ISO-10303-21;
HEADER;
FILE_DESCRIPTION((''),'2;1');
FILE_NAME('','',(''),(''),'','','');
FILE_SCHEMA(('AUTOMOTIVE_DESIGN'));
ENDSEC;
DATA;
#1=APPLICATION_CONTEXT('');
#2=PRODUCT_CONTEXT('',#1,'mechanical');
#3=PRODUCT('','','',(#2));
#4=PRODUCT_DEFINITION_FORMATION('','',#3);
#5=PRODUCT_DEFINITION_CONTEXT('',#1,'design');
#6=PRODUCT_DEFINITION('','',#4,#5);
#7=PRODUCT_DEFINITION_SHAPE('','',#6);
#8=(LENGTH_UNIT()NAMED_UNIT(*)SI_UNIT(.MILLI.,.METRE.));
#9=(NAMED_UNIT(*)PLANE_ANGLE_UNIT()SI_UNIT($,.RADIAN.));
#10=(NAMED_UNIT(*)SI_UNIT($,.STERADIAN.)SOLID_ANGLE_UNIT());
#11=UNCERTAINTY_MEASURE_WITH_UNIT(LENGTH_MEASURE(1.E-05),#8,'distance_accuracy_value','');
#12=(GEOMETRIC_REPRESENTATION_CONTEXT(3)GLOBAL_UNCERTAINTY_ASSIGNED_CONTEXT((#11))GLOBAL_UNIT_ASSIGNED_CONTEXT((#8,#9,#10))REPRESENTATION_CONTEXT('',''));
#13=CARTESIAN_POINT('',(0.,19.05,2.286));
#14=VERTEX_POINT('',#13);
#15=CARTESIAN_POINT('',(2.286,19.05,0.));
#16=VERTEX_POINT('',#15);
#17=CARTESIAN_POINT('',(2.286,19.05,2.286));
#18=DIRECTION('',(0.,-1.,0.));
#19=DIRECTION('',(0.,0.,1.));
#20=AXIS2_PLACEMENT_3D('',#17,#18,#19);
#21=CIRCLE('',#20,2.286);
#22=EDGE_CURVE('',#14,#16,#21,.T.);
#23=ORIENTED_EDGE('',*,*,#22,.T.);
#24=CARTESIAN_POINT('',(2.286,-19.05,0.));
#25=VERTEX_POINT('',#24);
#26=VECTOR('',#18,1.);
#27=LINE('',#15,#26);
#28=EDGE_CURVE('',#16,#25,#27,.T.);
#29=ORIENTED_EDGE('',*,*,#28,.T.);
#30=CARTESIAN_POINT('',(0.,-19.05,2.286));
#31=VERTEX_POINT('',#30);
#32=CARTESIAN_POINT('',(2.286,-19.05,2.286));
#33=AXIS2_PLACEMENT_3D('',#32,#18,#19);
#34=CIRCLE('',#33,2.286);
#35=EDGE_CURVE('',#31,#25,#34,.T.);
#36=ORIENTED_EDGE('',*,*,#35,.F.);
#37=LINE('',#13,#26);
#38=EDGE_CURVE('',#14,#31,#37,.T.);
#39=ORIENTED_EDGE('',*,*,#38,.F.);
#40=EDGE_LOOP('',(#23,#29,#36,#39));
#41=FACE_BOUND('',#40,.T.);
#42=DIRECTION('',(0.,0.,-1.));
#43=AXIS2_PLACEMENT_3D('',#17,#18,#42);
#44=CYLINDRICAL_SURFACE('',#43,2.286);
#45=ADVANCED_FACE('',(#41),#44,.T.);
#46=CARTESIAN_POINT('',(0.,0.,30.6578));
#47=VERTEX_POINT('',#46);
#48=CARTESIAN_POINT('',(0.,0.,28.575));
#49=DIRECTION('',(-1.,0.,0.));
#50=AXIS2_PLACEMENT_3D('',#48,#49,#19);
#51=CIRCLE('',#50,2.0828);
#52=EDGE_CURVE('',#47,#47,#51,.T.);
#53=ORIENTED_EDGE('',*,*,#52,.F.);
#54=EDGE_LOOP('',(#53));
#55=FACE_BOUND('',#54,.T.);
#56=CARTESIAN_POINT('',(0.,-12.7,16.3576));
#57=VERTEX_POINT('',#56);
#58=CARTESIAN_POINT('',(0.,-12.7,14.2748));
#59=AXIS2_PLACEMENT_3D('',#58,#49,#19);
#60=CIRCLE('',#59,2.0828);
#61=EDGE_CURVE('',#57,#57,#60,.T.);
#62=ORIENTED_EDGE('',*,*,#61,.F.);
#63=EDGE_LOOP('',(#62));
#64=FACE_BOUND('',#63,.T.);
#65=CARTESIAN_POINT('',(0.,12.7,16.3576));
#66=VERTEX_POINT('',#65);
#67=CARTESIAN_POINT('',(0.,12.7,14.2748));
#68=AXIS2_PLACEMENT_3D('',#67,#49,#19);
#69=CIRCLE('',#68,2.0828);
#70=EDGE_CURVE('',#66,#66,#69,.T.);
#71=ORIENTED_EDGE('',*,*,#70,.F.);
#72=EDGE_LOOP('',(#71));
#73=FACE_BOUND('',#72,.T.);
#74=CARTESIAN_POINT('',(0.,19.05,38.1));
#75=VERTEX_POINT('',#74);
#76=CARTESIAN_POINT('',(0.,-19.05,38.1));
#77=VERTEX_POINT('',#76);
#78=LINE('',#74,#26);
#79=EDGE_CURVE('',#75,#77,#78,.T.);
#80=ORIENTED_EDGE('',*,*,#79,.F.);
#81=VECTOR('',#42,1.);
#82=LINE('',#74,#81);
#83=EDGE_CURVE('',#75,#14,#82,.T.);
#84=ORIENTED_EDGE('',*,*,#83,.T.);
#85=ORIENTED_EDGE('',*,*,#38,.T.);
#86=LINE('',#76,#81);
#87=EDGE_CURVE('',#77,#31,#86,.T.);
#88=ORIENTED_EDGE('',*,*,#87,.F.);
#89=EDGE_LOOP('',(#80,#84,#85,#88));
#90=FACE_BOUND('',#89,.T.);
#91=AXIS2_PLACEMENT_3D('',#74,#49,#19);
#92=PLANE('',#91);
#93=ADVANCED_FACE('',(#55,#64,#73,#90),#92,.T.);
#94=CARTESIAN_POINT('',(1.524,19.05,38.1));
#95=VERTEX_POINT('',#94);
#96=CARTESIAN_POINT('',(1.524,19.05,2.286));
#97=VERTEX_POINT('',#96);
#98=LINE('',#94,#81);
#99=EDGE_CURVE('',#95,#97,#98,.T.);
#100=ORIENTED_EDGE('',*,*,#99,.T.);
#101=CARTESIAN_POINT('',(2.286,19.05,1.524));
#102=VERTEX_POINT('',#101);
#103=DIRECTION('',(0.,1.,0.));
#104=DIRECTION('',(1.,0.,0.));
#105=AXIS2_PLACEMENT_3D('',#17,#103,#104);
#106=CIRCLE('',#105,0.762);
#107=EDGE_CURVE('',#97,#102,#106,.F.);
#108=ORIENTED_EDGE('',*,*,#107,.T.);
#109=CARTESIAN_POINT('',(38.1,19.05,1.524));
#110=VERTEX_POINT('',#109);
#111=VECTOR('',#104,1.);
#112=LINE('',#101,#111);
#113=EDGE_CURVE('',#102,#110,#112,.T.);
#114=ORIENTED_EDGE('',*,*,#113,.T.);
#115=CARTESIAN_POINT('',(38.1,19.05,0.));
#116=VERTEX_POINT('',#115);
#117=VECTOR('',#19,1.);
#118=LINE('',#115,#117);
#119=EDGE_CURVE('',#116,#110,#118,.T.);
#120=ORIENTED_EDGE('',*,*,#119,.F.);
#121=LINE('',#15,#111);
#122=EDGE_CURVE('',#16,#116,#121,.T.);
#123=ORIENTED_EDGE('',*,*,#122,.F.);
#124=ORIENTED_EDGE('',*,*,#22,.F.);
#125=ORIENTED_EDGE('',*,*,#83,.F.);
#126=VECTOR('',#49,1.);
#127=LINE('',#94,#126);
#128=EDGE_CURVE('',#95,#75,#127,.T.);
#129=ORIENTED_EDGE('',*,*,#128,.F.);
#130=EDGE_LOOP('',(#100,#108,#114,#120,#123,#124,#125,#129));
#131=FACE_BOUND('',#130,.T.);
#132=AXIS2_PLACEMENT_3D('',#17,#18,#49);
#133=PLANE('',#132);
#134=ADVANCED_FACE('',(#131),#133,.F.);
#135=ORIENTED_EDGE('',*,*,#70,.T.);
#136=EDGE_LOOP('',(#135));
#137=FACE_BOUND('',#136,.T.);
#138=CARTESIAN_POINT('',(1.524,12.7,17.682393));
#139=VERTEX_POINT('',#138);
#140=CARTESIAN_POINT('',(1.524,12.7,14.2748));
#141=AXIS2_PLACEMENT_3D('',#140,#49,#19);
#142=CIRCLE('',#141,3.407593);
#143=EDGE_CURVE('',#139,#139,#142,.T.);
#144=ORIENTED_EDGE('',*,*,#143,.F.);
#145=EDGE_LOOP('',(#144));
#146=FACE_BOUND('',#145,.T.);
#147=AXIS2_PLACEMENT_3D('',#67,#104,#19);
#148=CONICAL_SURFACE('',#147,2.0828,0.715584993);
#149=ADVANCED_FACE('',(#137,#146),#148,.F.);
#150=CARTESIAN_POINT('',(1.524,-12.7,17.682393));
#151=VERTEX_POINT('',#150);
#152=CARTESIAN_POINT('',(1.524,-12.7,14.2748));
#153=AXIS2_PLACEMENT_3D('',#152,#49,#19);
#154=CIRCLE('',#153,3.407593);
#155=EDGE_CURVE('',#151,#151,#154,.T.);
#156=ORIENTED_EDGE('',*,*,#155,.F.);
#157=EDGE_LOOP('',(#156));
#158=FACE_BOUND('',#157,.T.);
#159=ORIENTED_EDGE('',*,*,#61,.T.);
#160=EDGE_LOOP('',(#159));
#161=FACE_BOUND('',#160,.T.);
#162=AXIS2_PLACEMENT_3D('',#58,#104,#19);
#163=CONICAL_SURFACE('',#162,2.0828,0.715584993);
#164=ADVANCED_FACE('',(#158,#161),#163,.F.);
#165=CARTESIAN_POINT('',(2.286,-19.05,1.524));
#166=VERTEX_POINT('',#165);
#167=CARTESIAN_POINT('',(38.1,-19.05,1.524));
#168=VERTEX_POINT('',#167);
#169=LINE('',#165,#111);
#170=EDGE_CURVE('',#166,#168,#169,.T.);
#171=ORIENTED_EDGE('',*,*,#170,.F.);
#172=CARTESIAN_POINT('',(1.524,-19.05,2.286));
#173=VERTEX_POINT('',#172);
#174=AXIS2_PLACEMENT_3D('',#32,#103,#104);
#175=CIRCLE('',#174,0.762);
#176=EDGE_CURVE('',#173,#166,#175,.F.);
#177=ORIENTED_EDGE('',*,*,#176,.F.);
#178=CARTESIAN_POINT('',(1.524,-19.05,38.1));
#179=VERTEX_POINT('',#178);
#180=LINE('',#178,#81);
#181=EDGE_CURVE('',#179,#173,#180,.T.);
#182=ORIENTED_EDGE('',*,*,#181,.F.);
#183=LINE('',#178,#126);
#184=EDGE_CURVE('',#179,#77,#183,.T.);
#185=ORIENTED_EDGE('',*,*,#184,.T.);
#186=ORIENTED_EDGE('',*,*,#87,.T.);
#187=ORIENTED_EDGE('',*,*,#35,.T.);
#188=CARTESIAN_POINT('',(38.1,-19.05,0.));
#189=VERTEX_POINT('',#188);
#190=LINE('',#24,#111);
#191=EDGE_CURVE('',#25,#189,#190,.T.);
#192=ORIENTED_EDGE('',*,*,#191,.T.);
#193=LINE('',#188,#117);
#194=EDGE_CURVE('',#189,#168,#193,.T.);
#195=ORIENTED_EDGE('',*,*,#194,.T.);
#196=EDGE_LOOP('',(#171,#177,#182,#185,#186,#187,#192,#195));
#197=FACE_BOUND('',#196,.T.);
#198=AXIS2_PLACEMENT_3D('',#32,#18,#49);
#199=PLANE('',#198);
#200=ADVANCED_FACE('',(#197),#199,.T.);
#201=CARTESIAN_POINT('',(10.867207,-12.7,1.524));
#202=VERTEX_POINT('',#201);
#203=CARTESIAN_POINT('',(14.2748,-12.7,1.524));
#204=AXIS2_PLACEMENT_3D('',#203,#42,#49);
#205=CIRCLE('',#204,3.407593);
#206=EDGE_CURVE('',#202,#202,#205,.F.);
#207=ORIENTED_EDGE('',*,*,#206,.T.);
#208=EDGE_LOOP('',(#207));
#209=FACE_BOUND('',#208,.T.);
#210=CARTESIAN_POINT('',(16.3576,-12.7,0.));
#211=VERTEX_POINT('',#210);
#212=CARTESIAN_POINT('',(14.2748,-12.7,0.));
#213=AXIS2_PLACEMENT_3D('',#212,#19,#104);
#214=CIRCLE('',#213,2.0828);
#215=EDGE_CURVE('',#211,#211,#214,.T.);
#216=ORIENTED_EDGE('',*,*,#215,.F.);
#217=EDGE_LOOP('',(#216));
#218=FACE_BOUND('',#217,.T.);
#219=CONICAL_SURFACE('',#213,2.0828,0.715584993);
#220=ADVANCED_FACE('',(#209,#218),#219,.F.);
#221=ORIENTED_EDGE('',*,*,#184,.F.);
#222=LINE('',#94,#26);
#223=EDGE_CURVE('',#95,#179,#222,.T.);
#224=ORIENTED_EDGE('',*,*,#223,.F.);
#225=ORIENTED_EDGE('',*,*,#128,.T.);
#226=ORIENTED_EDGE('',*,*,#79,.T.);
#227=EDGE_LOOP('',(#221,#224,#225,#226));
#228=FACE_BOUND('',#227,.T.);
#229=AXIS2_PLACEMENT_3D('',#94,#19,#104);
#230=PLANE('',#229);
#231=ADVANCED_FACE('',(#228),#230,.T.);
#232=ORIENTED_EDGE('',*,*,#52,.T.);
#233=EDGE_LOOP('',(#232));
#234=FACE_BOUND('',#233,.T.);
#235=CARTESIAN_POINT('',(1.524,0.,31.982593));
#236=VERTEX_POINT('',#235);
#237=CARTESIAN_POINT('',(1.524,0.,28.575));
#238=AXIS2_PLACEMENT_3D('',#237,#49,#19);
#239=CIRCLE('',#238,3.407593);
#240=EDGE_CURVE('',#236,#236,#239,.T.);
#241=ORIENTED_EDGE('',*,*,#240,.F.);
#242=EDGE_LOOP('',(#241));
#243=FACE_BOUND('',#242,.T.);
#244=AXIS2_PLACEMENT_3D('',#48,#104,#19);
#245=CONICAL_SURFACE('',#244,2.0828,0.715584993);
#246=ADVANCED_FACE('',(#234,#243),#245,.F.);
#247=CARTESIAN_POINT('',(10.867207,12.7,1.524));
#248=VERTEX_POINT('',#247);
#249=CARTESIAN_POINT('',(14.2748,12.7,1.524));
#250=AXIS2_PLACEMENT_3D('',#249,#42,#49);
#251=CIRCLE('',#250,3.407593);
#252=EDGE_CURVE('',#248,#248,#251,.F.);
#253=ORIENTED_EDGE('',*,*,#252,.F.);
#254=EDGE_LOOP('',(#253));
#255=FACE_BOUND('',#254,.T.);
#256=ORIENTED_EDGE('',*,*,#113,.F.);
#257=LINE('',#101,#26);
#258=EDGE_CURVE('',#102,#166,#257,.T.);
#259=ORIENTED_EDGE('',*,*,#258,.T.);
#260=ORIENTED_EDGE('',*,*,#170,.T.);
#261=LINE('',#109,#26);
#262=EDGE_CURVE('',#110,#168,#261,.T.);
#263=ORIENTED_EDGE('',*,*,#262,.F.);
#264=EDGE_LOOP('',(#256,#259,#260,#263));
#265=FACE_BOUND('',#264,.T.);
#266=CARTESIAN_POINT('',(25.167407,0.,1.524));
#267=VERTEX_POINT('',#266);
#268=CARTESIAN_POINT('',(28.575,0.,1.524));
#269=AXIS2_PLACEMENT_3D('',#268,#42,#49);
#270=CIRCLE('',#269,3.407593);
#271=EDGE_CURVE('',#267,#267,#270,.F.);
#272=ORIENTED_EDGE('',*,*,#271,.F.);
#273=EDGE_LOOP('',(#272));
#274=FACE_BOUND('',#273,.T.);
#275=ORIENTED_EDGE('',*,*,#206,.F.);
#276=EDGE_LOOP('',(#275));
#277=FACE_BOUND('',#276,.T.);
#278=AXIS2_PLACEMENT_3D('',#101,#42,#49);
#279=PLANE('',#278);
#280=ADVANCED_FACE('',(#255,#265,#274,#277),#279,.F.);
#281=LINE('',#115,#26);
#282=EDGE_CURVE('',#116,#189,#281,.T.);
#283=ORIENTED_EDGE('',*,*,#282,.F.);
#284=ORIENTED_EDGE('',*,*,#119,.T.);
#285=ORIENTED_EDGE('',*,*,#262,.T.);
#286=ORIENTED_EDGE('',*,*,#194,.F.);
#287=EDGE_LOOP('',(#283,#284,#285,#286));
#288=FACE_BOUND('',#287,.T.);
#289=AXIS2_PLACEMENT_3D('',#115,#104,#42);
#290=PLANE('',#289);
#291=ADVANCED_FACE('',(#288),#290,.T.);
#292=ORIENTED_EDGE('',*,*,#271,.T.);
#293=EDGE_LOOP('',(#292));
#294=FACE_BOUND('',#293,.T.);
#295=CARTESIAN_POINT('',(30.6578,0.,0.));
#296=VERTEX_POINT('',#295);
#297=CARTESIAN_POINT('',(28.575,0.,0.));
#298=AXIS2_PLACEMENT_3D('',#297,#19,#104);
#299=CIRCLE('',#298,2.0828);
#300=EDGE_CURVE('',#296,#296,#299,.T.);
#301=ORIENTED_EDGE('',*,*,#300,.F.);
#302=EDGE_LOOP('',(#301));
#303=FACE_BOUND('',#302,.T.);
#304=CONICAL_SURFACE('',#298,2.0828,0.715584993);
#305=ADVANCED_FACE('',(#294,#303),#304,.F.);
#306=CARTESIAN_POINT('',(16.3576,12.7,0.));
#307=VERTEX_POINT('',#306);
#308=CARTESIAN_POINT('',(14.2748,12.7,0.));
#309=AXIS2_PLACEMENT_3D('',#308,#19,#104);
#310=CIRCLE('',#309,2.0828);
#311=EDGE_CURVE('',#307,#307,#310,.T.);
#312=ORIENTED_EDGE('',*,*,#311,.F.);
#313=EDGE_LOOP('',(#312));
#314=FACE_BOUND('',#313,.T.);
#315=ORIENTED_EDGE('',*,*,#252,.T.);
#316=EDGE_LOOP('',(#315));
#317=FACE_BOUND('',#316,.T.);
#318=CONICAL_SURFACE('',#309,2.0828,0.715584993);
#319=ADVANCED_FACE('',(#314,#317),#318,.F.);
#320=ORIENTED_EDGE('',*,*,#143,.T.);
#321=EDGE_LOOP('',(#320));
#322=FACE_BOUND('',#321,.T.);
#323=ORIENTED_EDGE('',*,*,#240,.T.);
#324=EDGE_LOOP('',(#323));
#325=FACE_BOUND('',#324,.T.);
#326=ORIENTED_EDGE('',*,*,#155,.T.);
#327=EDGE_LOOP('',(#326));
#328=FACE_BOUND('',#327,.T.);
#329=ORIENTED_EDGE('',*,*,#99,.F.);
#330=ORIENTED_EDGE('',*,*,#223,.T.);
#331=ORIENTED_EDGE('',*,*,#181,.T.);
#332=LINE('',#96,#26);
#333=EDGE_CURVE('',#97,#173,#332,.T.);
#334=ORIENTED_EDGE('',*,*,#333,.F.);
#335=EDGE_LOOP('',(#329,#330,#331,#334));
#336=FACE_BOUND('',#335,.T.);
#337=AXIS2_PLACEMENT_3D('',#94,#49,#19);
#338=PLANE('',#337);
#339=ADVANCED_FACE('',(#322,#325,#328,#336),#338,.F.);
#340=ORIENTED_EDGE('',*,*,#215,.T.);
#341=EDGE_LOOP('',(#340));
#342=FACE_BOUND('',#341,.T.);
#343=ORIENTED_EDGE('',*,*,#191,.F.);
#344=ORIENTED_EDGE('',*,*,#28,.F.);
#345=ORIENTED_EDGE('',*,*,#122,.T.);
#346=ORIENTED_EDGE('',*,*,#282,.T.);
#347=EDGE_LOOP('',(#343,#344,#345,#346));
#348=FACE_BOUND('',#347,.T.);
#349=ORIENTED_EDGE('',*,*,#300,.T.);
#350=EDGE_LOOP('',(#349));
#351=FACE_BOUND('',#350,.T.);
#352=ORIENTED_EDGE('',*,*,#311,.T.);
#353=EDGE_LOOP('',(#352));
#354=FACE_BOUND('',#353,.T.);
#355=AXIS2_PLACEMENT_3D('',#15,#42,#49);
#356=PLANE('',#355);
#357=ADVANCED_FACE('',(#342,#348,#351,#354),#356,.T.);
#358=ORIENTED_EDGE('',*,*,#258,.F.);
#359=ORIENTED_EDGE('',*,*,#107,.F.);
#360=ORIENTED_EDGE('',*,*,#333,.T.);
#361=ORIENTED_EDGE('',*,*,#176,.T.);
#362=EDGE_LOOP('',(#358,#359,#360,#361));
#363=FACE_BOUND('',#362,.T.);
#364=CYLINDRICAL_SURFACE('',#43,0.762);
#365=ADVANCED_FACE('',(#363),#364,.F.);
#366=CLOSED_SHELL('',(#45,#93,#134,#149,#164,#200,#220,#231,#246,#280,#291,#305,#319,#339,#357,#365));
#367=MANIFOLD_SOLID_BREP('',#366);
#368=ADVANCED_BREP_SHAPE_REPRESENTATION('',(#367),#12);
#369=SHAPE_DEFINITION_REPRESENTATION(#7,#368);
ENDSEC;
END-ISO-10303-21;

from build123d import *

# Parameters (mm, degrees)
EXTRUDE_THIN1_START          = -19.05
EXTRUDE_THIN1_DEPTH          = 38.1
SKETCH4_R                    = 2.0828
EXTRUDE3_DEPTH               = 57.145492036
SKETCH5_R                    = 2.0828
CUT_EXTRUDE1_DEPTH           = 2.54
CUT_EXTRUDE1_DRAFT           = 41
CUT_EXTRUDE1_PROFILE_2_DEPTH = 2.54
CUT_EXTRUDE1_PROFILE_2_DRAFT = 41
CUT_EXTRUDE1_PROFILE_3_DEPTH = 2.54
CUT_EXTRUDE1_PROFILE_3_DRAFT = 41
MIRROR1_COPY_1_SKETCH_R      = 2.0828
MIRROR1_COPY_1_DEPTH         = 2.54
MIRROR1_COPY_1_DRAFT         = 41
MIRROR1_COPY_2_SKETCH_R      = 2.0828
MIRROR1_COPY_2_DEPTH         = 2.54
MIRROR1_COPY_2_DRAFT         = 41
MIRROR1_COPY_3_SKETCH_R      = 2.0828
MIRROR1_COPY_3_DEPTH         = 2.54
MIRROR1_COPY_3_DRAFT         = 41
MIRROR1_COPY_4_SKETCH_R      = 2.0828
MIRROR1_COPY_4_DEPTH         = 2.54
MIRROR1_COPY_4_DRAFT         = 41
MIRROR1_COPY_5_SKETCH_R      = 2.0828
MIRROR1_COPY_5_DEPTH         = 2.54
MIRROR1_COPY_5_DRAFT         = 41


# Read off the part's stored shape, not the designer's step: Extrude-Thin1
with BuildPart() as part:
    # Extrude-Thin1 outline → Extrude-Thin1 (new body)
    with BuildSketch(Plane(origin=(0, 0, 0), x_dir=(1, 0, 0), z_dir=(0, 1, 0)).offset(EXTRUDE_THIN1_START)):
        with BuildLine():
            Line((2.286, -1.524), (38.1, -1.524))
            Line((38.1, -1.524), (38.1, 0))
            Line((38.1, 0), (2.286, 0))
            ThreePointArc((2.286, 0), (0.669553898, -0.669553898), (0, -2.286))
            Line((0, -2.286), (0, -38.1))
            Line((0, -38.1), (1.524, -38.1))
            Line((1.524, -38.1), (1.524, -2.286))
            ThreePointArc((1.524, -2.286), (1.747184633, -1.747184633), (2.286, -1.524))
        make_face()
    extrude(amount=EXTRUDE_THIN1_DEPTH)

    # Sketch4 → Extrude3 (cut, through all)
    with BuildSketch(Plane(origin=(1.524, 0, 0), x_dir=(0, 0, -1), z_dir=(1, 0, 0))):
        with Locations((-28.575, 0)):
            Circle(SKETCH4_R)
        with Locations((-14.2748, 12.7)):
            Circle(SKETCH4_R)
        with Locations((-14.2748, -12.7)):
            Circle(SKETCH4_R)
    extrude3 = extrude(amount=-EXTRUDE3_DEPTH, mode=Mode.SUBTRACT)


with BuildPart() as cut_extrude1_tool:
    # Sketch5 → Cut-Extrude1 (with draft: the straight prism first)
    with BuildSketch(Plane.ZY):
        with Locations((14.2748, -12.7)):
            Circle(SKETCH5_R)
    extrude(amount=-CUT_EXTRUDE1_DEPTH)
    # Cut-Extrude1: the draft: its side faces are tilted about the plane it starts from
    cut_extrude1_sides = [cut_extrude1_tool.faces().sort_by_distance(p)[0] for p in [
        (1.27, -12.7, 12.192),
    ]]
    draft(cut_extrude1_sides, Plane.ZY, CUT_EXTRUDE1_DRAFT)


with BuildPart() as part_1:
    add(part.part)

    # Cut-Extrude1: cut by cut_extrude1_tool
    add(cut_extrude1_tool.part, mode=Mode.SUBTRACT)


with BuildPart() as cut_extrude1_profile_2_tool:
    # Sketch5 → Cut-Extrude1 profile 2 (with draft: the straight prism first)
    with BuildSketch(Plane.ZY):
        with Locations((14.2748, 12.7)):
            Circle(SKETCH5_R)
    extrude(amount=-CUT_EXTRUDE1_PROFILE_2_DEPTH)
    # Cut-Extrude1 profile 2: the draft: its side faces are tilted about the plane it starts from
    cut_extrude1_profile_2_sides = [cut_extrude1_profile_2_tool.faces().sort_by_distance(p)[0] for p in [
        (1.27, 12.7, 12.192),
    ]]
    draft(cut_extrude1_profile_2_sides, Plane.ZY, CUT_EXTRUDE1_PROFILE_2_DRAFT)


with BuildPart() as part_2:
    add(part_1.part)

    # Cut-Extrude1 profile 2: cut by cut_extrude1_profile_2_tool
    add(cut_extrude1_profile_2_tool.part, mode=Mode.SUBTRACT)


with BuildPart() as cut_extrude1_profile_3_tool:
    # Sketch5 → Cut-Extrude1 profile 3 (with draft: the straight prism first)
    with BuildSketch(Plane.ZY):
        with Locations((28.575, 0)):
            Circle(SKETCH5_R)
    extrude(amount=-CUT_EXTRUDE1_PROFILE_3_DEPTH)
    # Cut-Extrude1 profile 3: the draft: its side faces are tilted about the plane it starts from
    cut_extrude1_profile_3_sides = [cut_extrude1_profile_3_tool.faces().sort_by_distance(p)[0] for p in [
        (1.27, 0, 26.4922),
    ]]
    draft(cut_extrude1_profile_3_sides, Plane.ZY, CUT_EXTRUDE1_PROFILE_3_DRAFT)


with BuildPart() as part_3:
    add(part_2.part)

    # Cut-Extrude1 profile 3: cut by cut_extrude1_profile_3_tool
    add(cut_extrude1_profile_3_tool.part, mode=Mode.SUBTRACT)

    # Mirror1: Extrude3 across plane
    add(extrude3.mirror(Plane(origin=(0, 0, 0), x_dir=(0.7071067811865465, 0, 0.7071067811865486), z_dir=(-0.7071067811865488, 0, 0.7071067811865464))), mode=Mode.SUBTRACT)


with BuildPart() as mirror1_copy_1_tool:
    # Mirror1 copy 1 sketch → Mirror1 copy 1 (with draft: the straight prism first)
    with BuildSketch(Plane(origin=(0, 0, 0), x_dir=(1, 0, 0), z_dir=(0, 0, -1))):
        with Locations((14.2748, 12.7)):
            Circle(MIRROR1_COPY_1_SKETCH_R)
    extrude(amount=-MIRROR1_COPY_1_DEPTH)
    # Mirror1 copy 1: the draft: its side faces are tilted about the plane it starts from
    mirror1_copy_1_sides = [mirror1_copy_1_tool.faces().sort_by_distance(p)[0] for p in [
        (12.192, -12.7, 1.27),
    ]]
    draft(mirror1_copy_1_sides, Plane(origin=(0, 0, 0), x_dir=(1, 0, 0), z_dir=(0, 0, -1)), MIRROR1_COPY_1_DRAFT)


with BuildPart() as part_4:
    add(part_3.part)

    # Mirror1 copy 1: cut by mirror1_copy_1_tool
    add(mirror1_copy_1_tool.part, mode=Mode.SUBTRACT)


with BuildPart() as mirror1_copy_2_tool:
    # Mirror1 copy 2 sketch → Mirror1 copy 2 (with draft: the straight prism first)
    with BuildSketch(Plane(origin=(0, 0, 0), x_dir=(1, 0, 0), z_dir=(0, 0, -1))):
        with Locations((14.2748, -12.7)):
            Circle(MIRROR1_COPY_2_SKETCH_R)
    extrude(amount=-MIRROR1_COPY_2_DEPTH)
    # Mirror1 copy 2: the draft: its side faces are tilted about the plane it starts from
    mirror1_copy_2_sides = [mirror1_copy_2_tool.faces().sort_by_distance(p)[0] for p in [
        (12.192, 12.7, 1.27),
    ]]
    draft(mirror1_copy_2_sides, Plane(origin=(0, 0, 0), x_dir=(1, 0, 0), z_dir=(0, 0, -1)), MIRROR1_COPY_2_DRAFT)


with BuildPart() as part_5:
    add(part_4.part)

    # Mirror1 copy 2: cut by mirror1_copy_2_tool
    add(mirror1_copy_2_tool.part, mode=Mode.SUBTRACT)


with BuildPart() as mirror1_copy_3_tool:
    # Mirror1 copy 3 sketch → Mirror1 copy 3 (with draft: the straight prism first)
    with BuildSketch(Plane(origin=(0, 0, 0), x_dir=(1, 0, 0), z_dir=(0, 0, -1))):
        with Locations((28.575, 0)):
            Circle(MIRROR1_COPY_3_SKETCH_R)
    extrude(amount=-MIRROR1_COPY_3_DEPTH)
    # Mirror1 copy 3: the draft: its side faces are tilted about the plane it starts from
    mirror1_copy_3_sides = [mirror1_copy_3_tool.faces().sort_by_distance(p)[0] for p in [
        (26.4922, 0, 1.27),
    ]]
    draft(mirror1_copy_3_sides, Plane(origin=(0, 0, 0), x_dir=(1, 0, 0), z_dir=(0, 0, -1)), MIRROR1_COPY_3_DRAFT)


with BuildPart() as part_6:
    add(part_5.part)

    # Mirror1 copy 3: cut by mirror1_copy_3_tool
    add(mirror1_copy_3_tool.part, mode=Mode.SUBTRACT)


with BuildPart() as mirror1_copy_4_tool:
    # Mirror1 copy 4 sketch → Mirror1 copy 4 (with draft: the straight prism first)
    with BuildSketch(Plane(origin=(0, 0, 0), x_dir=(1, 0, 0), z_dir=(0, 0, -1))):
        with Locations((14.2748, -12.7)):
            Circle(MIRROR1_COPY_4_SKETCH_R)
    extrude(amount=-MIRROR1_COPY_4_DEPTH)
    # Mirror1 copy 4: the draft: its side faces are tilted about the plane it starts from
    mirror1_copy_4_sides = [mirror1_copy_4_tool.faces().sort_by_distance(p)[0] for p in [
        (12.192, 12.7, 1.27),
    ]]
    draft(mirror1_copy_4_sides, Plane(origin=(0, 0, 0), x_dir=(1, 0, 0), z_dir=(0, 0, -1)), MIRROR1_COPY_4_DRAFT)


with BuildPart() as part_7:
    add(part_6.part)

    # Mirror1 copy 4: cut by mirror1_copy_4_tool
    add(mirror1_copy_4_tool.part, mode=Mode.SUBTRACT)


with BuildPart() as mirror1_copy_5_tool:
    # Mirror1 copy 5 sketch → Mirror1 copy 5 (with draft: the straight prism first)
    with BuildSketch(Plane(origin=(0, 0, 0), x_dir=(1, 0, 0), z_dir=(0, 0, -1))):
        with Locations((28.575, 0)):
            Circle(MIRROR1_COPY_5_SKETCH_R)
    extrude(amount=-MIRROR1_COPY_5_DEPTH)
    # Mirror1 copy 5: the draft: its side faces are tilted about the plane it starts from
    mirror1_copy_5_sides = [mirror1_copy_5_tool.faces().sort_by_distance(p)[0] for p in [
        (26.4922, 0, 1.27),
    ]]
    draft(mirror1_copy_5_sides, Plane(origin=(0, 0, 0), x_dir=(1, 0, 0), z_dir=(0, 0, -1)), MIRROR1_COPY_5_DRAFT)


with BuildPart() as part_8:
    add(part_7.part)

    # Mirror1 copy 5: cut by mirror1_copy_5_tool
    add(mirror1_copy_5_tool.part, mode=Mode.SUBTRACT)


solid = part_8.part
